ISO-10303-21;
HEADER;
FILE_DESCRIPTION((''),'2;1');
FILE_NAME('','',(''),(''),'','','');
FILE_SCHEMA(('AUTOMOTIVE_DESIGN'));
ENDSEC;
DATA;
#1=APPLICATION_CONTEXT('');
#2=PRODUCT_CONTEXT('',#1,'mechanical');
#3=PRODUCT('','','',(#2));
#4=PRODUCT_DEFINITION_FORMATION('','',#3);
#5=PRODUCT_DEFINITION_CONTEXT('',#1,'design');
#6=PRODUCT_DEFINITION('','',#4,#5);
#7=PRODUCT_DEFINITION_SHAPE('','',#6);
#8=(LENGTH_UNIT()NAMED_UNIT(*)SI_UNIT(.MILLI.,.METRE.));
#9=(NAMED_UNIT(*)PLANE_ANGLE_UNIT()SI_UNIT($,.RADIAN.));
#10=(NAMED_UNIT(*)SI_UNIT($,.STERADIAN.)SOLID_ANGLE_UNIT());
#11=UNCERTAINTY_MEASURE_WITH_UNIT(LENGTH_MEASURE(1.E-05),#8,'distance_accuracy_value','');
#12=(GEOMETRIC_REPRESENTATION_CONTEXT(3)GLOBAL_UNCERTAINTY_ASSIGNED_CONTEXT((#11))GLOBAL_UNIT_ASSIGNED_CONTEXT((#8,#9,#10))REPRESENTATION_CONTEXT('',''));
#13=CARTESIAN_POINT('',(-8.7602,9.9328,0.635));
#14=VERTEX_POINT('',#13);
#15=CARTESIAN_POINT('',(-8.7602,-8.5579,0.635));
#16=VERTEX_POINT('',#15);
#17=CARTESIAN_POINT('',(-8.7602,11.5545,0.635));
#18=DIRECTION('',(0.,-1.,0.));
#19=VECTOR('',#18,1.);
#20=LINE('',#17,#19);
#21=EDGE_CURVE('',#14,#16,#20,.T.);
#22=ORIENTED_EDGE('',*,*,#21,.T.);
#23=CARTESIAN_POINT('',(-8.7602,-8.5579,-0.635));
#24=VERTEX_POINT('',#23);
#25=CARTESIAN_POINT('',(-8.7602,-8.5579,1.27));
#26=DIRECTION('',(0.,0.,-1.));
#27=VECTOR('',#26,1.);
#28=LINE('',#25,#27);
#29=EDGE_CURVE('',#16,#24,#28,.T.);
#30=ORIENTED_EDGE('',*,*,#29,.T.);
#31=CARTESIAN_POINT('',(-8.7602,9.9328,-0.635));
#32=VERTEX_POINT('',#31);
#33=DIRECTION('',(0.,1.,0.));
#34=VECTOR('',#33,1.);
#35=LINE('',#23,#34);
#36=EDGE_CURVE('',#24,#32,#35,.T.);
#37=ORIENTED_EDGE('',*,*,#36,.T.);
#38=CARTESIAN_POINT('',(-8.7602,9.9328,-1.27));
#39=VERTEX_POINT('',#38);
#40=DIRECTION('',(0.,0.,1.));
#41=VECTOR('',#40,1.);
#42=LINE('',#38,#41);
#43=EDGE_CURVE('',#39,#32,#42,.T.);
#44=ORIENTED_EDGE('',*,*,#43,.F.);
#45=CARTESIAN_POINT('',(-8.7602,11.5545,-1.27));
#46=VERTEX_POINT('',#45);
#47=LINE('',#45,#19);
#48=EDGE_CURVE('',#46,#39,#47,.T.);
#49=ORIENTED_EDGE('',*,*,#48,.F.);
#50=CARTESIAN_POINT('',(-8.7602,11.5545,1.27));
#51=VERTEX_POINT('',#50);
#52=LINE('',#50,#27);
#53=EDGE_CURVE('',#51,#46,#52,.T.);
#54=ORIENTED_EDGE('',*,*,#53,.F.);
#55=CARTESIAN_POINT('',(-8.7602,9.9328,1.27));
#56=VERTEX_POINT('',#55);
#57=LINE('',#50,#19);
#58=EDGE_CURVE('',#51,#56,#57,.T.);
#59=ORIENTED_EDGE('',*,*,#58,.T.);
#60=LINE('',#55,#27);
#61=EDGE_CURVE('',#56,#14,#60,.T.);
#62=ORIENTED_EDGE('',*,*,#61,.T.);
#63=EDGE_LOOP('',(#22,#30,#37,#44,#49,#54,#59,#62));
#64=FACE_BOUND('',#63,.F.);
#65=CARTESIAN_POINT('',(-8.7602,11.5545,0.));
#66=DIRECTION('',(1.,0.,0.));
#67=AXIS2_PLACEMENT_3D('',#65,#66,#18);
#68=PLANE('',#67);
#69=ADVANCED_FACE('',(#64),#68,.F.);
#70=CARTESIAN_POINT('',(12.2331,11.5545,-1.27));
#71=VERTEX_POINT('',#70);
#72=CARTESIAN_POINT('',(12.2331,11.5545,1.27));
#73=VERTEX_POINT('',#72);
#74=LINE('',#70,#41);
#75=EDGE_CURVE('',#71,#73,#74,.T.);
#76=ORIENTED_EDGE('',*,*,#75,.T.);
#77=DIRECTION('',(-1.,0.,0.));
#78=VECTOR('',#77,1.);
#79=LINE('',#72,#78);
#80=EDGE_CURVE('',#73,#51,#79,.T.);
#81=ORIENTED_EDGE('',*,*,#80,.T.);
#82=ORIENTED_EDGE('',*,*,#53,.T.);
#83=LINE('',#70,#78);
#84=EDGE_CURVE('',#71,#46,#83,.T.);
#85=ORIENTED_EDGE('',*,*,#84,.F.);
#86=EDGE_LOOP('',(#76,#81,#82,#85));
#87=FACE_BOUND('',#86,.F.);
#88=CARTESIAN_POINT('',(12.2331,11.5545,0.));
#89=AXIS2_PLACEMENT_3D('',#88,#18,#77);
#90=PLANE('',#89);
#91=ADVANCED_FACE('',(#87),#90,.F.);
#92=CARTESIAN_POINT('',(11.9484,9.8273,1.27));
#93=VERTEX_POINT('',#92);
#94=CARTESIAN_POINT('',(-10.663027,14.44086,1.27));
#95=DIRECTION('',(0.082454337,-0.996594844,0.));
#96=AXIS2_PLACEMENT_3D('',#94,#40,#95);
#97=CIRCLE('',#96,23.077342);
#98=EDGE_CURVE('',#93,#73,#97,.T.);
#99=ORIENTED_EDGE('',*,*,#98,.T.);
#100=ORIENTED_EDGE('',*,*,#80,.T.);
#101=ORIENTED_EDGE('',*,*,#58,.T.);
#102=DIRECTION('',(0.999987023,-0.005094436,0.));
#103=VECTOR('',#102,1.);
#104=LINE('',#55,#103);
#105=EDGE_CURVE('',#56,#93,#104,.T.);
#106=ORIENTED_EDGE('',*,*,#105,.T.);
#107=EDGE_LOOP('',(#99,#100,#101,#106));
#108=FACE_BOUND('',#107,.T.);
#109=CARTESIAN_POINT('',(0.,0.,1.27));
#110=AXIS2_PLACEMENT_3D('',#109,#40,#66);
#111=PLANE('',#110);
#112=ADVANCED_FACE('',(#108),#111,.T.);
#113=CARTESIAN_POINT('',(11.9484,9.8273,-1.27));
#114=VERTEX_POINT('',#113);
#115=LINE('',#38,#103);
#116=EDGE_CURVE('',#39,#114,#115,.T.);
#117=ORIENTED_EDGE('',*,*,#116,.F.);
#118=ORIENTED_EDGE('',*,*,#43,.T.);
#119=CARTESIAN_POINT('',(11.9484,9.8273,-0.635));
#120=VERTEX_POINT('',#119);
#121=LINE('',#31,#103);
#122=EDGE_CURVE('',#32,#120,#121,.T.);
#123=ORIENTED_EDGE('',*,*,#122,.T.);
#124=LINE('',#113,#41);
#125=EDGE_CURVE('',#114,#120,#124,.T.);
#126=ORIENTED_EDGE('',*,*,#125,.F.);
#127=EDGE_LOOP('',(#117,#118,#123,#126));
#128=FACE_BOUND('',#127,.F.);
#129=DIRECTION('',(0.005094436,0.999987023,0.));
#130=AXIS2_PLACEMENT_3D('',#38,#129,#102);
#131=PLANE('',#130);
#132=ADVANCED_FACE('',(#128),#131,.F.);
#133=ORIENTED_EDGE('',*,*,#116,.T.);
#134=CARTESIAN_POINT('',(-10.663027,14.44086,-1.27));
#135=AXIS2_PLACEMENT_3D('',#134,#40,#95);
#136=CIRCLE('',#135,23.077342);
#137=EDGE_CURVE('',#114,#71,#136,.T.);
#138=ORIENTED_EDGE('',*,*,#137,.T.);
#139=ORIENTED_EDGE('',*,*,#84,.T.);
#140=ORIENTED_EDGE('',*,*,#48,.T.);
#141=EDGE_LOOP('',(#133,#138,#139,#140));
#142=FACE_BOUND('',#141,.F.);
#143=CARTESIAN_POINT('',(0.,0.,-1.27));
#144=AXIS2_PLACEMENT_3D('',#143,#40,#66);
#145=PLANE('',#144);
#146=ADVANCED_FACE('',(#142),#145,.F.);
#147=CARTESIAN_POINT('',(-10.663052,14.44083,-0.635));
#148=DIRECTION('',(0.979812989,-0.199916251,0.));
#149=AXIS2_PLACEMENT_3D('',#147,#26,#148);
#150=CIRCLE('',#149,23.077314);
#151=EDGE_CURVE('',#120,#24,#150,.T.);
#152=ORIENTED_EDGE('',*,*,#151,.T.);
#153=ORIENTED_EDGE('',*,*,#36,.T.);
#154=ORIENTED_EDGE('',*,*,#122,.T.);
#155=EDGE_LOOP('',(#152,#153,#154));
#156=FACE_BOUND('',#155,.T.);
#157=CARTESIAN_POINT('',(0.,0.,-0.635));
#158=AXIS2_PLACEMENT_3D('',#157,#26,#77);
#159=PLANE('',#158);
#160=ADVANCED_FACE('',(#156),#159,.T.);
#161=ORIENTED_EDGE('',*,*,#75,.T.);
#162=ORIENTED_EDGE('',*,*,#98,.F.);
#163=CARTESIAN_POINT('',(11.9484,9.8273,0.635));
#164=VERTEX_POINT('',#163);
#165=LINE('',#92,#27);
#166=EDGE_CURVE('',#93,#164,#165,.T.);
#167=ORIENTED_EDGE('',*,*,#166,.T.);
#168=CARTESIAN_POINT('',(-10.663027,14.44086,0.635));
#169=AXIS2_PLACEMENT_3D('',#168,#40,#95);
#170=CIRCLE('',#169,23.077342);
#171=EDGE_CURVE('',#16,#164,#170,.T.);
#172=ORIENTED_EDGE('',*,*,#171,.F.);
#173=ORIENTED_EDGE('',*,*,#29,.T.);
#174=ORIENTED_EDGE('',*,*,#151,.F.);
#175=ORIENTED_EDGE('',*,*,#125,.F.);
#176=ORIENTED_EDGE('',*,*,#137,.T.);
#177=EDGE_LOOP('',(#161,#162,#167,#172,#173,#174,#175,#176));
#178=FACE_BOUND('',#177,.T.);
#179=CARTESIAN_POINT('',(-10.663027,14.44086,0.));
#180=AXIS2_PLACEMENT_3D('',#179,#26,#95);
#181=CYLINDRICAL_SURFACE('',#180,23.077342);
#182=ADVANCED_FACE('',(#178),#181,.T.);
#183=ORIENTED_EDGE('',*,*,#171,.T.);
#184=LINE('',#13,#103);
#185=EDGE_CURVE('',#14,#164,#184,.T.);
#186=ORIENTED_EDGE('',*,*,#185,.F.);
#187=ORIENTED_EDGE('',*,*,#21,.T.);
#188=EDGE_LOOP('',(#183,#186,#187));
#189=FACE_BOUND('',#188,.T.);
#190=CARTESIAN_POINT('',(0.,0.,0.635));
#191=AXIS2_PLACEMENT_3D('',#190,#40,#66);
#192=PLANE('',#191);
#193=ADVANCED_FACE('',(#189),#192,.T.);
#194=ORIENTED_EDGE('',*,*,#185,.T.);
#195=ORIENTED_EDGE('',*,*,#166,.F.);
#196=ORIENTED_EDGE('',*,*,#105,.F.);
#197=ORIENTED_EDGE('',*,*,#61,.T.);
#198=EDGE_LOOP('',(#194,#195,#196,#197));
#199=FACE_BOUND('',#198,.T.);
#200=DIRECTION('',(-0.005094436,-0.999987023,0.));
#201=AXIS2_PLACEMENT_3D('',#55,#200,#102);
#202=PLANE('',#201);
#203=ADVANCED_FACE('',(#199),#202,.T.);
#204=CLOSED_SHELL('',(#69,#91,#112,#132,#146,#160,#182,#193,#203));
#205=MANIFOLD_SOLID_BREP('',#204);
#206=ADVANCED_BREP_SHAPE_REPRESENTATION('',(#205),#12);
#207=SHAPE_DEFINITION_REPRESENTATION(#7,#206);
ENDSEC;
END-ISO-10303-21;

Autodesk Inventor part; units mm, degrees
ref_plane "YZ Plane" through (0, 0, 0) normal (1, 0, 0) x (0, 1, 0)
ref_plane "XZ Plane" through (0, 0, 0) normal (0, 1, 0) x (-1, 0, 0)
ref_plane "XY Plane" through (0, 0, 0) normal (0, 0, 1) x (1, 0, 0)
sketch "Sketch1" plane through (0, 0, 0) normal (0, 0, 1) x (1, 0, 0)
  line L0 (12.2331, 11.5545) -> (-8.7602, 11.5545)
  line L1 (-8.7602, 11.5545) -> (-8.7602, -8.5579)
  arc A0 (-8.7602, -8.5579) -> (12.2331, 11.5545) centre (-10.663, 14.4408) ccw
  point P0 (0, 0)
extrude "Extrusion1" add sketch "Sketch1" along normal mid plane 2.54
sketch "Sketch2" plane through (0, 0, 1.27) normal (0, 0, 1) x (1, 0, 0)
  line L0 (-8.7602, 11.5545) -> (-8.7602, -8.5579) projected
  line L1 (-8.7602, 9.9328) -> (11.9484, 9.8273)
  arc A0 (-8.7602, -8.5579) -> (12.2331, 11.5545) centre (-10.663, 14.4408) ccw projected
  point P0 (0, 0)
extrude "Extrusion2" cut sketch "Sketch2" against normal blind 0.635
sketch "Sketch3" plane through (0, 0, -1.27) normal (0, 0, -1) x (-1, 0, 0)
  line L0 (8.7602, 9.9328) -> (-11.9484, 9.8273) projected
  line L1 (8.7602, -8.5579) -> (8.7602, 11.5545) projected
  line L2 (8.7602, 9.9328) -> (8.7602, -8.5579)
  arc A0 (-11.9484, 9.8273) -> (8.7602, -8.5579) centre (10.663, 14.4408) ccw
  point P0 (0, 0)
extrude "Extrusion3" cut sketch "Sketch3" against normal blind 0.635
properties part number "Control surface"
